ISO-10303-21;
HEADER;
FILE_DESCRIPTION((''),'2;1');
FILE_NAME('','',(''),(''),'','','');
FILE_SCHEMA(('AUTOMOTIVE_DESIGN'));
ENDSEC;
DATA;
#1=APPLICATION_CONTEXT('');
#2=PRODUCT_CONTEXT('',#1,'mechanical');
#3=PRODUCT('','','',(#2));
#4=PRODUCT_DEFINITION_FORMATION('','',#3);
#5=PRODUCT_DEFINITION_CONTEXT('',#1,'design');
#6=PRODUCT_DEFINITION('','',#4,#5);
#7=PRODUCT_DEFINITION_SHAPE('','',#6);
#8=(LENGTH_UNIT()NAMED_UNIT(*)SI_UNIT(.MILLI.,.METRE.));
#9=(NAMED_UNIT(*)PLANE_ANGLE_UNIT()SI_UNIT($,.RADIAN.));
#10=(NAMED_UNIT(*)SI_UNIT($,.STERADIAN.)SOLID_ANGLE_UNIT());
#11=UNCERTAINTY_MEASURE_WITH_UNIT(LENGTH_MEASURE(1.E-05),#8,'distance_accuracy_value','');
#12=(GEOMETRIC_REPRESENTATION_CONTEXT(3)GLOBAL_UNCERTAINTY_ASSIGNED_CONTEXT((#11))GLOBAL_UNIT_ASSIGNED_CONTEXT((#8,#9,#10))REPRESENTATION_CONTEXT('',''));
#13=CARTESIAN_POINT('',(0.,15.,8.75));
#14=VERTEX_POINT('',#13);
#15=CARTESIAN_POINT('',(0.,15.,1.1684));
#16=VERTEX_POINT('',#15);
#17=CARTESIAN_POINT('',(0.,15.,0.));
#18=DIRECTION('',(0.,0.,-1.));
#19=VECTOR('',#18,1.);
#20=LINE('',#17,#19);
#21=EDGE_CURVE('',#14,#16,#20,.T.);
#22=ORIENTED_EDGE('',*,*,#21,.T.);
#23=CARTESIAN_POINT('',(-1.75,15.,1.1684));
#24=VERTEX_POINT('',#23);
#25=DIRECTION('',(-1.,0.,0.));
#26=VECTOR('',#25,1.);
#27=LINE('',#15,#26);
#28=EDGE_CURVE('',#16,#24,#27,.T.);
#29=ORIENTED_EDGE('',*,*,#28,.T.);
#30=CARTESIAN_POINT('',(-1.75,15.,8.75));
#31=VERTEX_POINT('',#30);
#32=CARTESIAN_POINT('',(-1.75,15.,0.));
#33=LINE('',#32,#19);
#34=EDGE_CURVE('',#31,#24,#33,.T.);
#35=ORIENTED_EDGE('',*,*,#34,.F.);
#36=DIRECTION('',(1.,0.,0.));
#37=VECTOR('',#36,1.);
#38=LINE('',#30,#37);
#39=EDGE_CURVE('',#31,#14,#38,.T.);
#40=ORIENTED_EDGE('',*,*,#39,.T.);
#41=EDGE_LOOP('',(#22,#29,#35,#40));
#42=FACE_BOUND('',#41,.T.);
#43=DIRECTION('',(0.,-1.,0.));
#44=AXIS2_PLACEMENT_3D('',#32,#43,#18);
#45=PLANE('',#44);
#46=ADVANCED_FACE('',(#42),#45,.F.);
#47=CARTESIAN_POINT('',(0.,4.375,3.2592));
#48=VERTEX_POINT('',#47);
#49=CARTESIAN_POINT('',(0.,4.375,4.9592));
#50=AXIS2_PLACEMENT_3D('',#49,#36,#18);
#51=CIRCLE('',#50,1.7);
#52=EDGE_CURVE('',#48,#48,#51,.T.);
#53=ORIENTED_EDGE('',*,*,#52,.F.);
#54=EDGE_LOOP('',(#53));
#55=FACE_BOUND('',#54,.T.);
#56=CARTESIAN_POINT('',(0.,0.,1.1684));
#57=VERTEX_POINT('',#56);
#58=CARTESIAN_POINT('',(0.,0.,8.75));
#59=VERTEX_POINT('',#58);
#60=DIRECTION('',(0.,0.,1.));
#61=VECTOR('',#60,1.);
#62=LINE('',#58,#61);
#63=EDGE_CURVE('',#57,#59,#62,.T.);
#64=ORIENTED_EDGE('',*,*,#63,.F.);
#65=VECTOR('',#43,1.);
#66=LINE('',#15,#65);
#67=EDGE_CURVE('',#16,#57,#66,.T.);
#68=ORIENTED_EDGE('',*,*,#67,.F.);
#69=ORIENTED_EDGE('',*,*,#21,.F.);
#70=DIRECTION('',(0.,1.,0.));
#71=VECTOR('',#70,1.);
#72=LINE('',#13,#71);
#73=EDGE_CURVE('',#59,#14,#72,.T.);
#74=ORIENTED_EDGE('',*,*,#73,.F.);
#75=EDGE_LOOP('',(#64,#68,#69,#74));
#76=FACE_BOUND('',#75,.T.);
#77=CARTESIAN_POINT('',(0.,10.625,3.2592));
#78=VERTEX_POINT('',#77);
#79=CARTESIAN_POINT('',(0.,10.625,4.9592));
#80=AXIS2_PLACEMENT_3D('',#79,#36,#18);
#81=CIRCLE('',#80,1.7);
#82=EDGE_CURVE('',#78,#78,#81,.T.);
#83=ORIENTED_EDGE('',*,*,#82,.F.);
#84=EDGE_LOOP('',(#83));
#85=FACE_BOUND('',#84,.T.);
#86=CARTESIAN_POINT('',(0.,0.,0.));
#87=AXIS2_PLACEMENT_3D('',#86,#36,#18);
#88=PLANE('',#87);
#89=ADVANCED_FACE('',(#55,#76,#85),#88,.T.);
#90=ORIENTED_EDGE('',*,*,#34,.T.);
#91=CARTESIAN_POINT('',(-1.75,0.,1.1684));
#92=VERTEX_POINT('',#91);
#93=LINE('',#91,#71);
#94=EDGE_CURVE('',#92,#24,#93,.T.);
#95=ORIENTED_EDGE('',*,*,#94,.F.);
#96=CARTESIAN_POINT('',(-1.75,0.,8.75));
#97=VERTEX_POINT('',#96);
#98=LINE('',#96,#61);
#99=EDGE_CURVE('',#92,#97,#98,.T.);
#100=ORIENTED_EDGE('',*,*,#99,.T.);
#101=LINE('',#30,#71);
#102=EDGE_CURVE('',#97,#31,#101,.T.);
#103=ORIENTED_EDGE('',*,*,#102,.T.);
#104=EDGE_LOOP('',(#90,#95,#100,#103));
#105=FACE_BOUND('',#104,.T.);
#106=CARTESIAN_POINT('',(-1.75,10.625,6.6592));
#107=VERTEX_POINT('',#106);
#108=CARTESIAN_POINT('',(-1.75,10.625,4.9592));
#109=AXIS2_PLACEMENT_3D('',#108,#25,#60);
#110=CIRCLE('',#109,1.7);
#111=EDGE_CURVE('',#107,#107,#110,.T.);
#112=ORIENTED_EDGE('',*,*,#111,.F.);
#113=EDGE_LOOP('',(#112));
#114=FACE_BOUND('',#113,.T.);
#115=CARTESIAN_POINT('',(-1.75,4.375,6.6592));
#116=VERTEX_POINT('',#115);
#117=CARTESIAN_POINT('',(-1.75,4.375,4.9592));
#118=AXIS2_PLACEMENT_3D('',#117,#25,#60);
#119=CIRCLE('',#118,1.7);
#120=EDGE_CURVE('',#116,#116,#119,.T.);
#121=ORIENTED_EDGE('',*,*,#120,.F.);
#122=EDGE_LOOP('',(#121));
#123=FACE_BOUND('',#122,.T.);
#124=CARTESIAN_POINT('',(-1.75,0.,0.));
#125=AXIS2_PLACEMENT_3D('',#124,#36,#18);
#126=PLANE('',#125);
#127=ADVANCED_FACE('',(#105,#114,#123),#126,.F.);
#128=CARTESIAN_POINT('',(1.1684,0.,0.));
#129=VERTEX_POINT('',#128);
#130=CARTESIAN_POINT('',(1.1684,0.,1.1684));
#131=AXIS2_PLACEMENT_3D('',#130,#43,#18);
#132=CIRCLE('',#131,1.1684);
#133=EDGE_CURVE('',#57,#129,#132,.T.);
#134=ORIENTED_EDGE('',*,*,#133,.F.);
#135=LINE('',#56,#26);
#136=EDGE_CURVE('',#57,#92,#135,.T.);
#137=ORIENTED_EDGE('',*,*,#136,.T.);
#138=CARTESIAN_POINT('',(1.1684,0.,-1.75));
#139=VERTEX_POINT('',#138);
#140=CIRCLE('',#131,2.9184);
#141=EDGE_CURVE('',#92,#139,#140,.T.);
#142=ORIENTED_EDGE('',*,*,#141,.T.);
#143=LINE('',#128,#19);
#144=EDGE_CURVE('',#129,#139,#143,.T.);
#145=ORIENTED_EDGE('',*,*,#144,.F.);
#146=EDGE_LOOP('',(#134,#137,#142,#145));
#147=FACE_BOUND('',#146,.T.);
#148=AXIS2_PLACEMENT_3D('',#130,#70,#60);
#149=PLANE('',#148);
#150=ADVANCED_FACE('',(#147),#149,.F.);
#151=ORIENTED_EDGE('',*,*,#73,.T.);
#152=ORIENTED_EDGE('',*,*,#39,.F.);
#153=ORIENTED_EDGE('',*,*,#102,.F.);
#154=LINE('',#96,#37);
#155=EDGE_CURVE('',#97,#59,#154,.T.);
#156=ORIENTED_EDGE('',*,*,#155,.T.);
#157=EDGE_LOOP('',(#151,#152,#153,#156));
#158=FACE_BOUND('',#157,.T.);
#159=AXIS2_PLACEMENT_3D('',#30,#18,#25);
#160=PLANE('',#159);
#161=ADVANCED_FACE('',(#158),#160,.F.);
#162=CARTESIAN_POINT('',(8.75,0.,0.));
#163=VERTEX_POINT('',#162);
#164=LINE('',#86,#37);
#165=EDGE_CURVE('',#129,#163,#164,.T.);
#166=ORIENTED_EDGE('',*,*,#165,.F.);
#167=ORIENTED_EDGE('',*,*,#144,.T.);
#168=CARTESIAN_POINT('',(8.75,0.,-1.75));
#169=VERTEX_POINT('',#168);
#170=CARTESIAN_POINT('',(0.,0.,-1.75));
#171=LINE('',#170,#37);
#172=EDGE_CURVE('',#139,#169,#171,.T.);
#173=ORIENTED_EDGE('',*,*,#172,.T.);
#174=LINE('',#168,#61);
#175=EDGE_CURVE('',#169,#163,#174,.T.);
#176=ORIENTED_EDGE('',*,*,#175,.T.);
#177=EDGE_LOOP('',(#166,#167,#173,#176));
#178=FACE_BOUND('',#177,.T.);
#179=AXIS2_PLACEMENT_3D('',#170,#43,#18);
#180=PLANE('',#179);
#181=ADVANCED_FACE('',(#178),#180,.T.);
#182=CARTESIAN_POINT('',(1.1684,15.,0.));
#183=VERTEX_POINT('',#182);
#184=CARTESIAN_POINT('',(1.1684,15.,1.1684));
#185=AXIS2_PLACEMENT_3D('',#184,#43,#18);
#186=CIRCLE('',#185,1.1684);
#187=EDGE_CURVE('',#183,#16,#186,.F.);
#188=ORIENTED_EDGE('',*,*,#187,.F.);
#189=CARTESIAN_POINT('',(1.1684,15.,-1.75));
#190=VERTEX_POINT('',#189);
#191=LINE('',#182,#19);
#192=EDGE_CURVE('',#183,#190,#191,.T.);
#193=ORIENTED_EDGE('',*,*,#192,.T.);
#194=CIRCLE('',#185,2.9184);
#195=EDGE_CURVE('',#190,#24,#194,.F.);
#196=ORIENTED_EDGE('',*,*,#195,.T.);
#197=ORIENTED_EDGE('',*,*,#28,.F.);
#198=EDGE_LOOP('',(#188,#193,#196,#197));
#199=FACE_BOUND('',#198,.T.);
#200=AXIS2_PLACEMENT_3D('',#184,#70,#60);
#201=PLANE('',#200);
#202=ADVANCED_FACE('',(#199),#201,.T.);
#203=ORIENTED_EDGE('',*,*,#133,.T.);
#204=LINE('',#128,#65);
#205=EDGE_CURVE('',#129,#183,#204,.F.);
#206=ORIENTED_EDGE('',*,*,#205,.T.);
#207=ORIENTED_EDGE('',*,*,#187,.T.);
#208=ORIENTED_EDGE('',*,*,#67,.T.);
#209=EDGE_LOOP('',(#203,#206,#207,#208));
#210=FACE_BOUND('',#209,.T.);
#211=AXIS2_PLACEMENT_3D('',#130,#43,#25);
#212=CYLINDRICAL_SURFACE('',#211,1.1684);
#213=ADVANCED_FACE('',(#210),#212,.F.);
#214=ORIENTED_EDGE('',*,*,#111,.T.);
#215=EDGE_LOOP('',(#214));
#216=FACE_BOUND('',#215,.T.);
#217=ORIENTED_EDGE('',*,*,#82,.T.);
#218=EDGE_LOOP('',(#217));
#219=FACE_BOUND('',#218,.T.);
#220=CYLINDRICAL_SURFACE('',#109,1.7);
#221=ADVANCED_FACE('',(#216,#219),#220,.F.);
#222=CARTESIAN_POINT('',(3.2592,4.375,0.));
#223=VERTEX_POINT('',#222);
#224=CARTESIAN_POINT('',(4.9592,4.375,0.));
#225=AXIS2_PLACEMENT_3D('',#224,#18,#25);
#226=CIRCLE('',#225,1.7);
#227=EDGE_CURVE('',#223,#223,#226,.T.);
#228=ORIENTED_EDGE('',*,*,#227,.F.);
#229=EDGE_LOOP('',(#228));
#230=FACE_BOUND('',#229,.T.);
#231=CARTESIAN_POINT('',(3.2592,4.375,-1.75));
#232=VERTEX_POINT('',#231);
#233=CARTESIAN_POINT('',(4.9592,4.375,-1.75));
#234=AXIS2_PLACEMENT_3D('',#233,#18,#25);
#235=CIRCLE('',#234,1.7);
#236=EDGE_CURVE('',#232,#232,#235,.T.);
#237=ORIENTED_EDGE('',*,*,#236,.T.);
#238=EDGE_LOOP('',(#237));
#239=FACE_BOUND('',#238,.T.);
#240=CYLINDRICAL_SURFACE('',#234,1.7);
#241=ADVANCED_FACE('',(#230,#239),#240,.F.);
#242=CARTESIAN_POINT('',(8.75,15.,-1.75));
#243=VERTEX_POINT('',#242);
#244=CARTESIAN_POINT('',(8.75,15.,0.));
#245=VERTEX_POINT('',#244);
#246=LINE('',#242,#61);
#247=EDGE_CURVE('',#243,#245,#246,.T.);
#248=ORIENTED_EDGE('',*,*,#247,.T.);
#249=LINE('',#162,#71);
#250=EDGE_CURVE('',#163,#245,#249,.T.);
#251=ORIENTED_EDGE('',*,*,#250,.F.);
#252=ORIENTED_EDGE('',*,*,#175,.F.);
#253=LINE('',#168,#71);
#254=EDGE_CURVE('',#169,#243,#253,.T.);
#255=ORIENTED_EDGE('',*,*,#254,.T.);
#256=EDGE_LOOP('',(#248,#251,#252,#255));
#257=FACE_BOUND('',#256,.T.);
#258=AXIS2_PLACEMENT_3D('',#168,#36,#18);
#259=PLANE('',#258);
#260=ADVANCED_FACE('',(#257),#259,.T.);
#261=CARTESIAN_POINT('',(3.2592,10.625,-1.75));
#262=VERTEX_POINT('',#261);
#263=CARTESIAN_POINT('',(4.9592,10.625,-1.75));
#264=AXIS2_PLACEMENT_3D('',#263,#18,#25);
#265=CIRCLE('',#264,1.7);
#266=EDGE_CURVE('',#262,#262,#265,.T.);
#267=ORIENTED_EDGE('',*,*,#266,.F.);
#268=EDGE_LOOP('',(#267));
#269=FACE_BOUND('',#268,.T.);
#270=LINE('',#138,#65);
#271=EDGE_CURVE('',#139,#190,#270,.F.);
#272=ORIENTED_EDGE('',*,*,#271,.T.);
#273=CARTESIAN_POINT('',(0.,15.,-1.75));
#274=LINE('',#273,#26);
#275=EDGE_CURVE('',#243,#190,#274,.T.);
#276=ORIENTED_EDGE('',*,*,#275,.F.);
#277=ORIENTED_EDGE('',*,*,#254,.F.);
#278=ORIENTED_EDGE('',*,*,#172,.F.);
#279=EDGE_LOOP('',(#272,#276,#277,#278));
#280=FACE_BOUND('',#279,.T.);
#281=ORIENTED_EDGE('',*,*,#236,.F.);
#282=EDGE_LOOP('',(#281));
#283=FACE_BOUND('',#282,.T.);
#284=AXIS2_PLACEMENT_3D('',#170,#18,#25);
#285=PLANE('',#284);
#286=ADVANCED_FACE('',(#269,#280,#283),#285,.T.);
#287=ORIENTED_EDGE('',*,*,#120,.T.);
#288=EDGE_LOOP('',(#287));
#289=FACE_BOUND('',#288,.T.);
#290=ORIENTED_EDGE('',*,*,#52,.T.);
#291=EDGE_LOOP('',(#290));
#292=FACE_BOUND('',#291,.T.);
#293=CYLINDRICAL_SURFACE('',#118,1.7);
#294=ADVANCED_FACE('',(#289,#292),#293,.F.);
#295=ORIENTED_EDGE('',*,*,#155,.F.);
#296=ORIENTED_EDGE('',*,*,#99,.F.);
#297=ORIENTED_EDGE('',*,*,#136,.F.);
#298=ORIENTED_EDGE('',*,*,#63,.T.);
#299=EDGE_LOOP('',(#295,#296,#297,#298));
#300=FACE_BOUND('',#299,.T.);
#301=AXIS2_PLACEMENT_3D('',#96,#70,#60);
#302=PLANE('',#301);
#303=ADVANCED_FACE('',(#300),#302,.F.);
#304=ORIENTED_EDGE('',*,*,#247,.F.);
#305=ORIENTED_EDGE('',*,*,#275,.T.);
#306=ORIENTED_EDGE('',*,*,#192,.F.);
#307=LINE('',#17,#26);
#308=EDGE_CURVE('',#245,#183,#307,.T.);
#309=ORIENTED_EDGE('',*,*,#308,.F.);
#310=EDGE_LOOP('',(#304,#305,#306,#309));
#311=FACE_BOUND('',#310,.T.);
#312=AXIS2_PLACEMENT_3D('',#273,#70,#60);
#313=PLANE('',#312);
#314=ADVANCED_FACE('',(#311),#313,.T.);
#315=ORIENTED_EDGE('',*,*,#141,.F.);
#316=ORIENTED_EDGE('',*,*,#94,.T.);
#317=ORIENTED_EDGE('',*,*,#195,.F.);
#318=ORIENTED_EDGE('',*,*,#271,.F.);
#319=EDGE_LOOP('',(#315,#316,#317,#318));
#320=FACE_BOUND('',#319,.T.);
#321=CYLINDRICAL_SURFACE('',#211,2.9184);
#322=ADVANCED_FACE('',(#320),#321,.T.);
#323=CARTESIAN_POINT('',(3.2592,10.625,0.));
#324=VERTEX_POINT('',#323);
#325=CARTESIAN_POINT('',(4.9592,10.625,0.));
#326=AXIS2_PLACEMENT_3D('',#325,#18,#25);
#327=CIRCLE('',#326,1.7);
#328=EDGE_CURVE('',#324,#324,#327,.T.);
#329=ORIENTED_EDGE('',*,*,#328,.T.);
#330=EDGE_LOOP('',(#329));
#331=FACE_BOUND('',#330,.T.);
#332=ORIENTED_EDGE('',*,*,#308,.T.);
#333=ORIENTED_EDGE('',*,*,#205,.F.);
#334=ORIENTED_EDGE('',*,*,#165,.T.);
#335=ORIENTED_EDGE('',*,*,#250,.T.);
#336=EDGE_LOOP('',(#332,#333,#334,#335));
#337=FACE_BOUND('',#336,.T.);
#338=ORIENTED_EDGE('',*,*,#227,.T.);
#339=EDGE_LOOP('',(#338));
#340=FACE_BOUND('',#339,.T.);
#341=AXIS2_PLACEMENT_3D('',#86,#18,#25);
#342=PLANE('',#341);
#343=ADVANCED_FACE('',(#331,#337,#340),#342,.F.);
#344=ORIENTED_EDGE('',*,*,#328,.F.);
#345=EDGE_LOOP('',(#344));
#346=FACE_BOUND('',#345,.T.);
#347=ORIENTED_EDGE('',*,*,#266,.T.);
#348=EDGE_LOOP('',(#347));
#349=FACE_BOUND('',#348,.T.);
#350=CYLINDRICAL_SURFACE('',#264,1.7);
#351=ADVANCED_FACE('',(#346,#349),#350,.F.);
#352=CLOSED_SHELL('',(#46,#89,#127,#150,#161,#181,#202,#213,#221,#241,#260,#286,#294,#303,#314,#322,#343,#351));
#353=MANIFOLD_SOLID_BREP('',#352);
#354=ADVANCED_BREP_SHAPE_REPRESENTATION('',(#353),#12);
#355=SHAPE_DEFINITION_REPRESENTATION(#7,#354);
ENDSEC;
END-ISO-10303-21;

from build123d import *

# Parameters (mm, degrees)
SKETCH1_W                      = 8.75
SKETCH1_H                      = 15
BASE_FLANGE1_DEPTH             = 1.75
EDGE_FLANGE1_STRIP_W           = 9.3368
EDGE_FLANGE1_STRIP_H           = 1.75
EDGE_FLANGE1_STRIP_CUT_DEPTH   = 15
EDGE_FLANGE1_DEPTH             = 15
M3_CLEARANCE_HOLE1_D           = 3.4
M3_CLEARANCE_HOLE1_ON_FACE_2_D = 3.4


# Sheet-metal steps are written as plain solids
with BuildPart() as part:
    # Sketch1 → Base-Flange1 (new body)
    with BuildSketch(Plane.XY):
        with Locations((4.375, 7.5)):
            Rectangle(SKETCH1_W, SKETCH1_H)
    extrude(amount=-BASE_FLANGE1_DEPTH)

    # Edge-Flange1 strip (across the edge) → Edge-Flange1 strip cut (cut)
    with BuildSketch(Plane.XZ.offset(-15)):
        with Locations((-3.5, -0.875)):
            Rectangle(EDGE_FLANGE1_STRIP_W, EDGE_FLANGE1_STRIP_H)
    extrude(amount=EDGE_FLANGE1_STRIP_CUT_DEPTH, mode=Mode.SUBTRACT)

    # Edge-Flange1 section (across the edge) → Edge-Flange1 (add)
    with BuildSketch(Plane.XZ.offset(-15)):
        with BuildLine():
            Line((-1.75, 1.1684), (-1.75, 8.75))
            Line((-1.75, 8.75), (0, 8.75))
            Line((0, 8.75), (0, 1.1684))
            ThreePointArc((0, 1.1684), (0.342216437, 0.342216437), (1.1684, 0))
            Line((1.1684, 0), (1.1684, -1.75))
            ThreePointArc((1.1684, -1.75), (-0.89522043, -0.89522043), (-1.75, 1.1684))
        make_face()
    extrude(amount=EDGE_FLANGE1_DEPTH)

    # M3 Clearance Hole1 (through all)
    with Locations(Plane(origin=(-1.75, 10.625, 4.9592), x_dir=(0, 0, -1), z_dir=(-1, 0, 0))):
        with Locations((0, 0), (0, 6.25)):
            Hole(M3_CLEARANCE_HOLE1_D / 2)

    # M3 Clearance Hole1 on face 2 (through all)
    with Locations(Plane(origin=(4.9592, 10.625, -1.75), x_dir=(-1, 0, 0), z_dir=(0, 0, -1))):
        with Locations((0, 0), (0, -6.25)):
            Hole(M3_CLEARANCE_HOLE1_ON_FACE_2_D / 2)


solid = part.part
